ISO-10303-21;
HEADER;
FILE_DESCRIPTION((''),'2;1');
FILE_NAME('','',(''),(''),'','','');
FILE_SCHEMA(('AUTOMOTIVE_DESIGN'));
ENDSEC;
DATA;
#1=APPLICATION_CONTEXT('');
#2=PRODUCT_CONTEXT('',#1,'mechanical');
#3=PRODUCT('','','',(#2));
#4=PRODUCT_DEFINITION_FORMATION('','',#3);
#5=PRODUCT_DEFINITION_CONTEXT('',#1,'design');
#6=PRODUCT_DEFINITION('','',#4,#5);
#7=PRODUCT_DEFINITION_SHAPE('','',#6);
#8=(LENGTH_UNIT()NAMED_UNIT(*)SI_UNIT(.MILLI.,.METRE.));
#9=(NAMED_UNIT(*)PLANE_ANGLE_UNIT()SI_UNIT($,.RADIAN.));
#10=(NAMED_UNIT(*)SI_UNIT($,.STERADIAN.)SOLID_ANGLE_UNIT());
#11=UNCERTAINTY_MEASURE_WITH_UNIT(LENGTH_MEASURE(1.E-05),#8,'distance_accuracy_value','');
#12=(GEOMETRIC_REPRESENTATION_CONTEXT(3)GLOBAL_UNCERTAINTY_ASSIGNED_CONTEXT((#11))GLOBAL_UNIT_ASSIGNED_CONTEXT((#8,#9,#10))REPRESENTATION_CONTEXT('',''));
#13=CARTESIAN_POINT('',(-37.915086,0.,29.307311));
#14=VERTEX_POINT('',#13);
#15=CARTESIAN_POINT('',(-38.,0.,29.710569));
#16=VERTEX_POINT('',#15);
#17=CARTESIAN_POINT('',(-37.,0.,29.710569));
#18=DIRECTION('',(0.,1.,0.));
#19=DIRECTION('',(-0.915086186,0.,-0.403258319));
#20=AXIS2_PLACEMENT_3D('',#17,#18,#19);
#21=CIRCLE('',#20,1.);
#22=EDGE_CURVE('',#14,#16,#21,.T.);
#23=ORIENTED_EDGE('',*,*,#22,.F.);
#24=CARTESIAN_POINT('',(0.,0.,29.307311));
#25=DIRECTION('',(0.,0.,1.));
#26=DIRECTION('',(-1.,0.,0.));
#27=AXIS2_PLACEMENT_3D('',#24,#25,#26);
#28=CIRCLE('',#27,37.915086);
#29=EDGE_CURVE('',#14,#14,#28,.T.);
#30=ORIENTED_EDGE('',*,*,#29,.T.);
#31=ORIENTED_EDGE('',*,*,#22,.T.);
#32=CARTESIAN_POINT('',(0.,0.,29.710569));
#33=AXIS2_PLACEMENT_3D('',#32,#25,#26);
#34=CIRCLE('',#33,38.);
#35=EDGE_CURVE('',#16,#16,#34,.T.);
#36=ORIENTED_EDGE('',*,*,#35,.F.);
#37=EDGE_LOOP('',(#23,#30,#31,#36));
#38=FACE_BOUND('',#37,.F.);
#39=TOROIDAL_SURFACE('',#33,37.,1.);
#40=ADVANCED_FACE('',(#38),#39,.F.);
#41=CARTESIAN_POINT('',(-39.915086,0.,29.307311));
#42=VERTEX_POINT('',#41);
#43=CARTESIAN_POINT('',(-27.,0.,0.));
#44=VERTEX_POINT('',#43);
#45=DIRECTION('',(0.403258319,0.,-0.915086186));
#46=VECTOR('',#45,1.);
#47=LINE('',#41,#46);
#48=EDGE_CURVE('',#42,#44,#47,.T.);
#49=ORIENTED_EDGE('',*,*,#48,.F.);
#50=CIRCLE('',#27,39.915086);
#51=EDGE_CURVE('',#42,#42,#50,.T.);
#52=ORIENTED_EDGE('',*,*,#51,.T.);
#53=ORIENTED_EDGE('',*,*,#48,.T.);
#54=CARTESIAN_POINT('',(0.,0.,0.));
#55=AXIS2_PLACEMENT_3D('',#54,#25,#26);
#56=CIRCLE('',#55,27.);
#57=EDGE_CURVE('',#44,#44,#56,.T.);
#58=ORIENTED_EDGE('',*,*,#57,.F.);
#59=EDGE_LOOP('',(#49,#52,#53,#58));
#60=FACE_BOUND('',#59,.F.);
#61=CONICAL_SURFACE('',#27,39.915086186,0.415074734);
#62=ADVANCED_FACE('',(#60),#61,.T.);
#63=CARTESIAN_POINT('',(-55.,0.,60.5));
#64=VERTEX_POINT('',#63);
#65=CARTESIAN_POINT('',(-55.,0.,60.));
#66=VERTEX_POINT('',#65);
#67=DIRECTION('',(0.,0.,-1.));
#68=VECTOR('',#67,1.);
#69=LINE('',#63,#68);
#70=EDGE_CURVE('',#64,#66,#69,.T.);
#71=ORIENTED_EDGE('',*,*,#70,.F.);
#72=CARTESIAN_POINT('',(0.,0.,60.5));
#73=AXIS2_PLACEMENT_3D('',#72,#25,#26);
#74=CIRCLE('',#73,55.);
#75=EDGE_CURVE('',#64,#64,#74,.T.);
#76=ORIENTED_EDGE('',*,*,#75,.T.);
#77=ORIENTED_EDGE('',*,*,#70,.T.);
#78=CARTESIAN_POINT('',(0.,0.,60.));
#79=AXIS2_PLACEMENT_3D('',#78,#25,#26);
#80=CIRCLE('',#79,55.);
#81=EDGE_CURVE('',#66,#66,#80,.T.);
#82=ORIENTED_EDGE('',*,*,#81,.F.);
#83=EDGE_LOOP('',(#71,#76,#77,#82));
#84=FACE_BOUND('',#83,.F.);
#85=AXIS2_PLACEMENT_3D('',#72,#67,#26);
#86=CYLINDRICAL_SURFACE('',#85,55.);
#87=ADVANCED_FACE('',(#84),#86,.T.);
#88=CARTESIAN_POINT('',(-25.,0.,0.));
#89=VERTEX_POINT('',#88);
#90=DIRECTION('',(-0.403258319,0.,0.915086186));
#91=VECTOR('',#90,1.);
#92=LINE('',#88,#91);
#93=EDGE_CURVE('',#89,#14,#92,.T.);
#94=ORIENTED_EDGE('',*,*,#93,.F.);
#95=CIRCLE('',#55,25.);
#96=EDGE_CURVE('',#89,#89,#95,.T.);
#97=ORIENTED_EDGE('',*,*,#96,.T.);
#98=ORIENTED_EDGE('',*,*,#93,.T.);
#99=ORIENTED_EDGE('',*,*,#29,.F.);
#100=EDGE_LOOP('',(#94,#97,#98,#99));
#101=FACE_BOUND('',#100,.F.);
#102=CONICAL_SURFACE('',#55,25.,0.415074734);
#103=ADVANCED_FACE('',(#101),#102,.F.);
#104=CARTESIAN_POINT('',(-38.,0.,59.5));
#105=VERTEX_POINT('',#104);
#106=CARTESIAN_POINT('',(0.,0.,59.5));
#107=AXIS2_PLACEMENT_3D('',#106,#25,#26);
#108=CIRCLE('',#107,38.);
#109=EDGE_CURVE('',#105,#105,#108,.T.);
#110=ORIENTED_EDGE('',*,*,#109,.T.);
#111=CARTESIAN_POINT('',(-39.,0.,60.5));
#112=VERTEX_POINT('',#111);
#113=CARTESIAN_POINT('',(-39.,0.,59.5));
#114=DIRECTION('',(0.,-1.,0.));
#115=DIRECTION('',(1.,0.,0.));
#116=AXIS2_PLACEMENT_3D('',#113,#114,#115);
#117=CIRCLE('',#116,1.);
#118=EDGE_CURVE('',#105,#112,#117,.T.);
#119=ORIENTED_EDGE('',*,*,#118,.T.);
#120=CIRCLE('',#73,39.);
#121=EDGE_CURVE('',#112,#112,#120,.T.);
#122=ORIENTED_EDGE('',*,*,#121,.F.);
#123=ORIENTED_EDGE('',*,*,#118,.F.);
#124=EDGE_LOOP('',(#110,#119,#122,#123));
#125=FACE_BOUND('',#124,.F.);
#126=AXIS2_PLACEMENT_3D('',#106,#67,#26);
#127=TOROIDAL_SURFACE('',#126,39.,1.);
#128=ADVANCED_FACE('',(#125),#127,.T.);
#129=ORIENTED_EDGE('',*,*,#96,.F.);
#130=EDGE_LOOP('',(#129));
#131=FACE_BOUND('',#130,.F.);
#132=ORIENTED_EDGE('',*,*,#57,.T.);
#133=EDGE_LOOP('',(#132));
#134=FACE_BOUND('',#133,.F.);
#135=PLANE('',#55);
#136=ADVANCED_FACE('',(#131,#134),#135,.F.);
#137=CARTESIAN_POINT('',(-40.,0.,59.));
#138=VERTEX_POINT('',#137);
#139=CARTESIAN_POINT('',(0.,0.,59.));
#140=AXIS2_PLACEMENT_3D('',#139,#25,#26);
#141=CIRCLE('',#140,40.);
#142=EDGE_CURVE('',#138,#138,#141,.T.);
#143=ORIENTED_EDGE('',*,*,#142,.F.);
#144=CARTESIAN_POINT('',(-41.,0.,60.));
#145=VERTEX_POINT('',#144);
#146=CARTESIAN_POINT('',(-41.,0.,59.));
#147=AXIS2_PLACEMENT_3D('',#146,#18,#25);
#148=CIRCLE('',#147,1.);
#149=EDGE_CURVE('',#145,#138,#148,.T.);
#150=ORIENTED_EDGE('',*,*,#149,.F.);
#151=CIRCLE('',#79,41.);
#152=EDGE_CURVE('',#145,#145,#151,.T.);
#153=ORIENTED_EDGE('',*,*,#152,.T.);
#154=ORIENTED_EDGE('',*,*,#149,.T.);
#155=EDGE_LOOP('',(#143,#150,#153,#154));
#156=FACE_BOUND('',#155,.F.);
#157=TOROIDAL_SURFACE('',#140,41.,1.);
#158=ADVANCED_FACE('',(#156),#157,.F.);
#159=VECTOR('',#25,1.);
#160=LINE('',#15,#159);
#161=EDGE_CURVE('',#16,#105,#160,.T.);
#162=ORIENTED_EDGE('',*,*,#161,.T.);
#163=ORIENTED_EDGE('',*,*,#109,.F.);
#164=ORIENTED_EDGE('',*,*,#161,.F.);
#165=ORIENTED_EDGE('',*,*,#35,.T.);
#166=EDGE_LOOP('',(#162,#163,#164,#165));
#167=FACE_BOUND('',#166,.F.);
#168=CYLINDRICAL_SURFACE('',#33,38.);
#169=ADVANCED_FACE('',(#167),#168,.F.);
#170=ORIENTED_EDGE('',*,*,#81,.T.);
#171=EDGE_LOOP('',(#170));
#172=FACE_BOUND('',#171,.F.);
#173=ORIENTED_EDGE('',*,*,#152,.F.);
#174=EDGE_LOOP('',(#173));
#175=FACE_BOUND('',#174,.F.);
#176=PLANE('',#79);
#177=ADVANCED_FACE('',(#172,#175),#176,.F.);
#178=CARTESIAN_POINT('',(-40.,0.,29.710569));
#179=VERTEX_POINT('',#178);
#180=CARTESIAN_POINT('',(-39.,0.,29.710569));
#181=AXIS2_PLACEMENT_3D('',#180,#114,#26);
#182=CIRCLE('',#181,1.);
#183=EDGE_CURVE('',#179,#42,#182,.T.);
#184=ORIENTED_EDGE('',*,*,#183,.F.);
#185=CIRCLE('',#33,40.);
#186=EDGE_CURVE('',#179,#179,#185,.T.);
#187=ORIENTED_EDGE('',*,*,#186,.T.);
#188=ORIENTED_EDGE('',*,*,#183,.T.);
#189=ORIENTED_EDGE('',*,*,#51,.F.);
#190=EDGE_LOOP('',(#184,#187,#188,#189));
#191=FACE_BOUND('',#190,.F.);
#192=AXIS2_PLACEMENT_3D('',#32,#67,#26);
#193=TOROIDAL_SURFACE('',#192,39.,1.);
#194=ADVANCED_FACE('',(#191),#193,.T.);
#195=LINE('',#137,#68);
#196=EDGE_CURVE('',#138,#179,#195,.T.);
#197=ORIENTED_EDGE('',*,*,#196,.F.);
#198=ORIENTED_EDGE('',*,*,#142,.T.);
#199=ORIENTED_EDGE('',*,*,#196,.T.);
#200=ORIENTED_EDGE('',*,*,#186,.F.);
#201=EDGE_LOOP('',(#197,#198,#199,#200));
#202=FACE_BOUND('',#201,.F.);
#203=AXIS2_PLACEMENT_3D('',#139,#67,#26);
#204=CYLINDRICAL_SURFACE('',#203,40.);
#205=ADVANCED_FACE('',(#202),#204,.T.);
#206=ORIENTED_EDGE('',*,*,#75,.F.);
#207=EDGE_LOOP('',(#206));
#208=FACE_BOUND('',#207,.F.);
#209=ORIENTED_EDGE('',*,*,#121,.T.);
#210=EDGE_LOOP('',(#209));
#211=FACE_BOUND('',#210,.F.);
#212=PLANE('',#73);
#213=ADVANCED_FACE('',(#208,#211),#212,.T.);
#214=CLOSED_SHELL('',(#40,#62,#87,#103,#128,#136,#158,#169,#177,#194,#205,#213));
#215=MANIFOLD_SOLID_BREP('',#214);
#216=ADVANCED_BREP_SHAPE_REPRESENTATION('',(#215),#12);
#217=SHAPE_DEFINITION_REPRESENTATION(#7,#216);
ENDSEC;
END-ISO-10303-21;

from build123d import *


# Not quite as in the source:
# - a feature names something its author has since deleted; it is built from what else it names


with BuildPart() as f1:
    # F0 (on Front) → F1 (revolve)
    with BuildSketch(Plane.XZ):
        with BuildLine():
            Line((-55, 60), (-41, 60))
            ThreePointArc((-41, 60), (-40.2928932188, 59.7071067812), (-40, 59))
            Line((-40, 59), (-40, 29.71056928))
            ThreePointArc((-40, 29.71056928), (-39.9785413088, 29.5045185412), (-39.9150861861, 29.3073109607))
            Line((-39.9150861861, 29.3073109607), (-27, 0))
            Line((-27, 0), (-25, 0))
            Line((-25, 0), (-37.9150861861, 29.3073109607))
            ThreePointArc((-37.9150861861, 29.3073109607), (-37.9785413088, 29.5045185412), (-38, 29.71056928))
            Line((-38, 29.71056928), (-38, 59.5))
            ThreePointArc((-38, 59.5), (-38.2928932188, 60.2071067812), (-39, 60.5))
            Line((-39, 60.5), (-55, 60.5))
            Line((-55, 60.5), (-55, 60))
        make_face()
    revolve(axis=Axis((0, 0, 19.5262523685), (0, 0, 1)))


solid = f1.part
